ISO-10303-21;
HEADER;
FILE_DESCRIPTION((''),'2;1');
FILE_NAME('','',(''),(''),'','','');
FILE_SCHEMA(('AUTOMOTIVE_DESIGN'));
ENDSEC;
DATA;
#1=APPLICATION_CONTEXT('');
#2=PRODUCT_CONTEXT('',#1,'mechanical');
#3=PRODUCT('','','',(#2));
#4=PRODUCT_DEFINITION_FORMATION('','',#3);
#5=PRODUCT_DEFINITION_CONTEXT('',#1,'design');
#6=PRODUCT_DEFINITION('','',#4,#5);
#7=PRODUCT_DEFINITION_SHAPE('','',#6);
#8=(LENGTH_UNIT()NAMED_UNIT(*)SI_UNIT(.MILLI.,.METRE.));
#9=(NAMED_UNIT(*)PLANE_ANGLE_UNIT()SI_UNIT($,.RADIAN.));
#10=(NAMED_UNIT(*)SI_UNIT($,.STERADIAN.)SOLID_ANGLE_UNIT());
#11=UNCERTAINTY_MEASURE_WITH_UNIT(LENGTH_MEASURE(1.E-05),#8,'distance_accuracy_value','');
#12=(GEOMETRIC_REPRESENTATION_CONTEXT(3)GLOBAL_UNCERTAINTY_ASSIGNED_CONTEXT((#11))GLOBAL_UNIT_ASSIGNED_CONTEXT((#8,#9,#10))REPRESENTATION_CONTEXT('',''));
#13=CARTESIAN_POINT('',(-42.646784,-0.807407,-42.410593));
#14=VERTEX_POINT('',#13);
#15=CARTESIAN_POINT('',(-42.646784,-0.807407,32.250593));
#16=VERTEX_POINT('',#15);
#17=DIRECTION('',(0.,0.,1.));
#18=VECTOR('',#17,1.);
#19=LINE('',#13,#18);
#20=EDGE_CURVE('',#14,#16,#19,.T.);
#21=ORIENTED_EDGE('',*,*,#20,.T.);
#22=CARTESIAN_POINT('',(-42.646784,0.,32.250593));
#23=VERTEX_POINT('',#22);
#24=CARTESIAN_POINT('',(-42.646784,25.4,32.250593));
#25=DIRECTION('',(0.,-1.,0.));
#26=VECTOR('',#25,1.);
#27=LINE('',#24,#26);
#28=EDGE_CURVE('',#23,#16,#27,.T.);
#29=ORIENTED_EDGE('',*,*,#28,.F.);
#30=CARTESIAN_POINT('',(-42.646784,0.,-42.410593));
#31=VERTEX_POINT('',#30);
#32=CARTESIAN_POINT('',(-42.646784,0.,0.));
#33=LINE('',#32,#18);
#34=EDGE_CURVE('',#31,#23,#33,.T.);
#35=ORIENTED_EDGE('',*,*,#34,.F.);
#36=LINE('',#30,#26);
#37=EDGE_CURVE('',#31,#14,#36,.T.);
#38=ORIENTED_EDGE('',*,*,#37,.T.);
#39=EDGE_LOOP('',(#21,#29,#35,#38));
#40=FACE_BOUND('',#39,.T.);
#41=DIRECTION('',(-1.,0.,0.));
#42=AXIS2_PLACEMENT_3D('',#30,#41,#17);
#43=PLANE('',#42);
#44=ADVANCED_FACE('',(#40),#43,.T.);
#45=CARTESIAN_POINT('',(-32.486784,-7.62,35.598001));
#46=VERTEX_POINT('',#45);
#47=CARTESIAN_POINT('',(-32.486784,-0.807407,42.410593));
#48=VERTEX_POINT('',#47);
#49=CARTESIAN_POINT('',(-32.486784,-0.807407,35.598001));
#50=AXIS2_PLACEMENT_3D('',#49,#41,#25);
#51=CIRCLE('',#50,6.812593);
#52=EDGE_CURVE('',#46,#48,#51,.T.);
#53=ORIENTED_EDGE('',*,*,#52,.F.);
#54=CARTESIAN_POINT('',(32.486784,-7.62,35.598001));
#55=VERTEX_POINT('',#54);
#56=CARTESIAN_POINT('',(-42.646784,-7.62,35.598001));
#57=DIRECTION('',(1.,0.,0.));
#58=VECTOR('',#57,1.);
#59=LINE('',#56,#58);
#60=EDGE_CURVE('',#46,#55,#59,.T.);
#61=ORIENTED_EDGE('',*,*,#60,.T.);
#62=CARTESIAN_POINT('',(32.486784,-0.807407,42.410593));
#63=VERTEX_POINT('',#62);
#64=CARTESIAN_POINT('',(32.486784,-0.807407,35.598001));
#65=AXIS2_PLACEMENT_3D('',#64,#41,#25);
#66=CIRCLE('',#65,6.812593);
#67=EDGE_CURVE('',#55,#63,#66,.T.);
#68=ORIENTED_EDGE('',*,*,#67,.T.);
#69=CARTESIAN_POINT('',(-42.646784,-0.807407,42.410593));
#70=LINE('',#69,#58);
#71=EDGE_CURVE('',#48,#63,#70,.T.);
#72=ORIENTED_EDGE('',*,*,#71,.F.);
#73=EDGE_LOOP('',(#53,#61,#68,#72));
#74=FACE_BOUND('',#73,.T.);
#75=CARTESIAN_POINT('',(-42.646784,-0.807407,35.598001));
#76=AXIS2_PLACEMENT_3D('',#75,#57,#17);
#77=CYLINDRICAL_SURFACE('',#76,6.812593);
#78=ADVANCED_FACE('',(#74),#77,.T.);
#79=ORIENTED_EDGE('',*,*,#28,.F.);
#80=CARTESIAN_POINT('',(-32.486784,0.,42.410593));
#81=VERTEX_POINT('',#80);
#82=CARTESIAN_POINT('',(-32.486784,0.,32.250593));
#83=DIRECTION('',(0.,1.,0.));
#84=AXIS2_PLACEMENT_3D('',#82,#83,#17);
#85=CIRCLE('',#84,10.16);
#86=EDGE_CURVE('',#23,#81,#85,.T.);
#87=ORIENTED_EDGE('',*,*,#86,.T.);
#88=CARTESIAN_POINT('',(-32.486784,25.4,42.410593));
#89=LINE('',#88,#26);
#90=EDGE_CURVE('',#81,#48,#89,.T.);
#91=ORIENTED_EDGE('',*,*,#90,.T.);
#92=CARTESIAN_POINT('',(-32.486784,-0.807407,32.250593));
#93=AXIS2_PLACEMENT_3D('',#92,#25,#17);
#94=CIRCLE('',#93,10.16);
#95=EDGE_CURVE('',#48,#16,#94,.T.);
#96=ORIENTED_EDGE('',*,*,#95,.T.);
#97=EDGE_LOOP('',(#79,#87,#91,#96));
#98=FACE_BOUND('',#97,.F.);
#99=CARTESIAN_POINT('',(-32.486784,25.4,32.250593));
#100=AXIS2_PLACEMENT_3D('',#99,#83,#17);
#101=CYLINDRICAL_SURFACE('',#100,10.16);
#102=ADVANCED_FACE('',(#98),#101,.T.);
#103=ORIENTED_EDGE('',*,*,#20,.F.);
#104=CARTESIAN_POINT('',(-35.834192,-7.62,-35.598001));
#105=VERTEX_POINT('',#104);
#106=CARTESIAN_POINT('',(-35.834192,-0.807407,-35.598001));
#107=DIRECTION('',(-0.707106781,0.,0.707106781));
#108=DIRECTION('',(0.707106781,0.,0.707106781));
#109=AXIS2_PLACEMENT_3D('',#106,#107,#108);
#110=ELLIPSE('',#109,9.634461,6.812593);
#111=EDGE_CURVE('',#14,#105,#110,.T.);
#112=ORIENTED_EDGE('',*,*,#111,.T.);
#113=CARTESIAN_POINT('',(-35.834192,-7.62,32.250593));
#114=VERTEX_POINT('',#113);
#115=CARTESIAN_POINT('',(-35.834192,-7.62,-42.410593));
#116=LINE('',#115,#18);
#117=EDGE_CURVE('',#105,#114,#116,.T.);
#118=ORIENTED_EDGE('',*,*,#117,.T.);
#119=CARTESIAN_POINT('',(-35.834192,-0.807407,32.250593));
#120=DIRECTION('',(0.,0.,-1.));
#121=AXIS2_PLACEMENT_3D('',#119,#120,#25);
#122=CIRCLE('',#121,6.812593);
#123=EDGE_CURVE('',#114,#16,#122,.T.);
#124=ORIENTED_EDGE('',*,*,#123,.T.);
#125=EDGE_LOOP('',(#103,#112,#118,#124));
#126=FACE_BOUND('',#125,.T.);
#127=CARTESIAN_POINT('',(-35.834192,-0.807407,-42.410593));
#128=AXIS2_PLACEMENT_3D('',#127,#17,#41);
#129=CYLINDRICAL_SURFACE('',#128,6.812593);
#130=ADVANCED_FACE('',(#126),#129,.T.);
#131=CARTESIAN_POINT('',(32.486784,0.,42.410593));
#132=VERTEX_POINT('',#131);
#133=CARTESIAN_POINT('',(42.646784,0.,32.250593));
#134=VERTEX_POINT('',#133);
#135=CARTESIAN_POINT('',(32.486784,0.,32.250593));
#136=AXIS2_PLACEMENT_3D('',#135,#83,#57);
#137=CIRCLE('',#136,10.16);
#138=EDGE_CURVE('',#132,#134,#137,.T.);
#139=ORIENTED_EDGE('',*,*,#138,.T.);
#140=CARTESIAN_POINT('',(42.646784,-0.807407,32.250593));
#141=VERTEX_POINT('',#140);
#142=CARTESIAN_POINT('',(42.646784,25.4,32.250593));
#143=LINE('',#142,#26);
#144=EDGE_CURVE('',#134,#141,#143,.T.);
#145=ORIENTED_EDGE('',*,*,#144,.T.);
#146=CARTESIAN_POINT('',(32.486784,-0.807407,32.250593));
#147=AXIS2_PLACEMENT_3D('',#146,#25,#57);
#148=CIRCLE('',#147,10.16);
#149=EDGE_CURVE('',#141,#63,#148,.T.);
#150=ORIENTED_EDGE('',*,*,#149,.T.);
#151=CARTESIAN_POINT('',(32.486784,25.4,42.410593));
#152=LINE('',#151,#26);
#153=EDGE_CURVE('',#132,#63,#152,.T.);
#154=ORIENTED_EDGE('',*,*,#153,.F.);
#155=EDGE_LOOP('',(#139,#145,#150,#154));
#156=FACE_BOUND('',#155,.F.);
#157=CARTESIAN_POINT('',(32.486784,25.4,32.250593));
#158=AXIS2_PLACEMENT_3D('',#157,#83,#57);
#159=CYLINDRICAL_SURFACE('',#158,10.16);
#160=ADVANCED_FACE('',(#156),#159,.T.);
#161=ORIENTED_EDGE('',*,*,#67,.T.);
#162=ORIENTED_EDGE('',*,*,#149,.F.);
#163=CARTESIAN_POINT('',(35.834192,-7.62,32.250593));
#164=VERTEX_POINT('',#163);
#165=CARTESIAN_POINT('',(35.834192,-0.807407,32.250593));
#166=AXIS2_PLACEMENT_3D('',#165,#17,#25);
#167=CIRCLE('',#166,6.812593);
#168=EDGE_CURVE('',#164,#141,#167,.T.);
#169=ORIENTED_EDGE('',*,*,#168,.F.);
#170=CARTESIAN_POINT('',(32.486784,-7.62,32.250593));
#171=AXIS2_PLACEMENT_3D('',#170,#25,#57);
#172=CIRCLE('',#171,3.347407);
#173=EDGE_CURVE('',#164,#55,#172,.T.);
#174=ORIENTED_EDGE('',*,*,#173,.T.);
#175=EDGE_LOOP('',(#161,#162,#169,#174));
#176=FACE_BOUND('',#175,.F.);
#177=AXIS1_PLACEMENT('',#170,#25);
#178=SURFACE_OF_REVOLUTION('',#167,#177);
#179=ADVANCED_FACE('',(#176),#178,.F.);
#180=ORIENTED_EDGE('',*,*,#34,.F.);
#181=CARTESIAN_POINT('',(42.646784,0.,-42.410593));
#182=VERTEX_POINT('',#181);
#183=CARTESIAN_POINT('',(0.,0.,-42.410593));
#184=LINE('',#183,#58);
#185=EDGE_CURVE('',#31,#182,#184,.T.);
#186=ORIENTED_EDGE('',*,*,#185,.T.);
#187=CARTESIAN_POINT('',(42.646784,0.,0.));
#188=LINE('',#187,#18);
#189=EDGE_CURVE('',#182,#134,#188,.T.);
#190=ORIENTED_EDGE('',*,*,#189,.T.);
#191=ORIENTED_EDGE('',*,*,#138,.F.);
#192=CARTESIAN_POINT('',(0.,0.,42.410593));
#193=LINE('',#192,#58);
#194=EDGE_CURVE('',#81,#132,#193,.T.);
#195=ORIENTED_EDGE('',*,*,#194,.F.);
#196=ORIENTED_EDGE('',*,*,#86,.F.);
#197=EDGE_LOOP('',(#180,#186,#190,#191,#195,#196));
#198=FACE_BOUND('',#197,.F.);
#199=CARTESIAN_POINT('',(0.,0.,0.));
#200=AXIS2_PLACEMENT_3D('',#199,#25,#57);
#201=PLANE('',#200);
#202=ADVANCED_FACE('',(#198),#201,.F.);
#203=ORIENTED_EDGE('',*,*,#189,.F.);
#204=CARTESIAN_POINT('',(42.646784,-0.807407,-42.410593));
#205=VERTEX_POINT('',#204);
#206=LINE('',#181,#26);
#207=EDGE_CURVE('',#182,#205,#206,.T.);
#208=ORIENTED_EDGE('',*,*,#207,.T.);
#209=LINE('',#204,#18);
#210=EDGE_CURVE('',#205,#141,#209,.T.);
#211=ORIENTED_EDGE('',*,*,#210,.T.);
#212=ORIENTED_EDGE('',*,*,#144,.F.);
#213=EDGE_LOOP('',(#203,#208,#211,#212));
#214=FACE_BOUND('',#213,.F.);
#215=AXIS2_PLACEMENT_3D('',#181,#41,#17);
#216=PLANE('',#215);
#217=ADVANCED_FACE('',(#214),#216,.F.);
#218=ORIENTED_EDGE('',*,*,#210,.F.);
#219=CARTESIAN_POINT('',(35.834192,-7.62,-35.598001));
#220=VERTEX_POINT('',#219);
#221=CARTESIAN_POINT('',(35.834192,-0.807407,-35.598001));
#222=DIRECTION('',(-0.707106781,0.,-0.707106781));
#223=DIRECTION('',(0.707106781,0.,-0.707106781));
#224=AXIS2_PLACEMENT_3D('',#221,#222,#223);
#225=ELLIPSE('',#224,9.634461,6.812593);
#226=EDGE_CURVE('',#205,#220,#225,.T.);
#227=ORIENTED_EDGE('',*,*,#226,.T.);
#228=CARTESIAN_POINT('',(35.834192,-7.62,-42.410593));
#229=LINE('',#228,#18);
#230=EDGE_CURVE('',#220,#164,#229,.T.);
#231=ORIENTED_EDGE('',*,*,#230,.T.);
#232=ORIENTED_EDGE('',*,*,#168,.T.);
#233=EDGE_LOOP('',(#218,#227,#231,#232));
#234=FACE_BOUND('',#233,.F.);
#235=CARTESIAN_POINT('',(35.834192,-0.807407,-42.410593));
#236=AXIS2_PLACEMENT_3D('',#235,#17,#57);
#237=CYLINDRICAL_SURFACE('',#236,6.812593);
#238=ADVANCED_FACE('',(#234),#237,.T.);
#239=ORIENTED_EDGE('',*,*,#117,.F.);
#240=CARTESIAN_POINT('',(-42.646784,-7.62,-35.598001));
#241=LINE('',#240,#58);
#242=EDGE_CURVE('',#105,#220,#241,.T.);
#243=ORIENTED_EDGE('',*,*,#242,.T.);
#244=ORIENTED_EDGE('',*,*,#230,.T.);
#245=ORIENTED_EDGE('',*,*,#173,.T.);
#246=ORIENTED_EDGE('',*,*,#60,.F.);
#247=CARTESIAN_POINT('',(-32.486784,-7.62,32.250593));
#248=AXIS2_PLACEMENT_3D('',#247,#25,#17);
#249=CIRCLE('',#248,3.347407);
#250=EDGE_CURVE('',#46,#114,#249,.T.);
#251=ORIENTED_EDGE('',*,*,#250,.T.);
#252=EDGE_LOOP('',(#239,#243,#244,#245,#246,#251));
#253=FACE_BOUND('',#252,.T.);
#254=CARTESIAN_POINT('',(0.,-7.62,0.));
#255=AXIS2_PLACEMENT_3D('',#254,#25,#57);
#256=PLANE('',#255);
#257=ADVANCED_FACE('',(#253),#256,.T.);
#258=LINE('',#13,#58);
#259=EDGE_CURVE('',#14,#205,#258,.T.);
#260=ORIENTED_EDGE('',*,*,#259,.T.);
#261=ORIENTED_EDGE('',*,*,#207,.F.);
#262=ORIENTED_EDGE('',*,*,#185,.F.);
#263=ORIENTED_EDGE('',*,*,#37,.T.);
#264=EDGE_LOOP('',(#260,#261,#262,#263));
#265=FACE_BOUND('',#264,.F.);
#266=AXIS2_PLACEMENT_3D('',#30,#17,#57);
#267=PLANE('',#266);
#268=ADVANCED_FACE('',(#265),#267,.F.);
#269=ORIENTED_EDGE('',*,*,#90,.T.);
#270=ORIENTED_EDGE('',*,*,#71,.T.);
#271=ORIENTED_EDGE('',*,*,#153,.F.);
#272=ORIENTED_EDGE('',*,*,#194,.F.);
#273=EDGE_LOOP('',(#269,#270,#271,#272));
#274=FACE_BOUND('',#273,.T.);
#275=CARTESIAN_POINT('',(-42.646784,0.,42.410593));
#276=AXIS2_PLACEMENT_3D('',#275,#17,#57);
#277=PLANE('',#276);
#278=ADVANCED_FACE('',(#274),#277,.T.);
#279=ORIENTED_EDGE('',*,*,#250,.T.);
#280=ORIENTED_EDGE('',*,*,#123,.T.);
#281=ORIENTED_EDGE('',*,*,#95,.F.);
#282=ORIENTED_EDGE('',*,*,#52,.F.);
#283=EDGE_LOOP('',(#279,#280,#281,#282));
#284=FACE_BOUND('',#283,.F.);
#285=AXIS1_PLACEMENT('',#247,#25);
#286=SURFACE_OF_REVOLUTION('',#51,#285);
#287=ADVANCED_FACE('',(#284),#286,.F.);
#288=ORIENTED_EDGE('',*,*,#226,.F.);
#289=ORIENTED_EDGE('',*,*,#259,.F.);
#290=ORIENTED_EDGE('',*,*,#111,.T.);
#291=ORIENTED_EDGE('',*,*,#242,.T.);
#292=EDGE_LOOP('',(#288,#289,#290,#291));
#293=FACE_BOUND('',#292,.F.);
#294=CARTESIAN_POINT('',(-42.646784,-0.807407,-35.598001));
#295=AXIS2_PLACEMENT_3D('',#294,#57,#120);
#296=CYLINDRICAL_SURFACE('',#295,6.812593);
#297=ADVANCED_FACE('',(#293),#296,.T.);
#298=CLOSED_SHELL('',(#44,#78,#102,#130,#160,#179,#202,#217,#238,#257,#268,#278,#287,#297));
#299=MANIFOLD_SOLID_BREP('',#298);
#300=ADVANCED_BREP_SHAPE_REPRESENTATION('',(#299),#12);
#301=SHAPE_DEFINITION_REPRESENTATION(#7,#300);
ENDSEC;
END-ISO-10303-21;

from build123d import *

# Parameters (mm, degrees)
F0_W        = 85.2935686707
F0_H        = 84.8211869597
F0_R        = 1.905
F0_R_2      = 0.8509
F1_DEPTH    = 7.62
F2_R        = 6.8125926862
F3_T1_DEPTH = 33.02
F3_T4_ANGLE = 90
F3_T6_ANGLE = 90


# Not quite as in the source:
# - a fillet or chamfer that OpenCascade refuses, or shapes differently, is made with other operations: its cross-section is extruded or revolved along the edge and cut away or added


with BuildPart() as f1:
    # F0 (on Front) → F1 (new body)
    with BuildSketch(Plane.XZ):
        Rectangle(F0_W, F0_H)
        Polygon((0, 38.1), (38.1, 38.1), (38.1, -38.1), (0, -38.1), (-38.1, -38.1), (-38.1, 38.1), align=None, mode=Mode.SUBTRACT)
        Polygon((25.4, 25.4), (0, 25.4), (-25.4, 25.4), (-25.4, -25.4), (0, -25.4), (25.4, -25.4), align=None)
        with Locations((-18.288, -12.446)):
            Circle(F0_R, mode=Mode.SUBTRACT)
        with Locations((19.812, -12.446)):
            Circle(F0_R, mode=Mode.SUBTRACT)
        with Locations((-18.288, 12.954)):
            Circle(F0_R, mode=Mode.SUBTRACT)
        with Locations((19.812, 12.954)):
            Circle(F0_R, mode=Mode.SUBTRACT)
        Polygon((0, 25.4), (0, 38.1), (-38.1, 38.1), (-38.1, -38.1), (0, -38.1), (0, -25.4), (-25.4, -25.4), (-25.4, 25.4), align=None)
        Polygon((38.1, -38.1), (38.1, 38.1), (0, 38.1), (0, 25.4), (25.4, 25.4), (25.4, -25.4), (0, -25.4), (0, -38.1), align=None)
        with Locations((-18.288, -12.446)):
            Circle(F0_R)
        with Locations((-18.288, -12.446)):
            Circle(F0_R_2, mode=Mode.SUBTRACT)
        with Locations((-18.288, 12.954)):
            Circle(F0_R)
        with Locations((-18.288, 12.954)):
            Circle(F0_R_2, mode=Mode.SUBTRACT)
        with Locations((19.812, 12.954)):
            Circle(F0_R)
        with Locations((19.812, 12.954)):
            Circle(F0_R_2, mode=Mode.SUBTRACT)
        with Locations((19.812, -12.446)):
            Circle(F0_R)
        with Locations((19.812, -12.446)):
            Circle(F0_R_2, mode=Mode.SUBTRACT)
        with Locations((-18.288, 12.954)):
            Circle(F0_R_2)
        with Locations((-18.288, -12.446)):
            Circle(F0_R_2)
        with Locations((19.812, 12.954)):
            Circle(F0_R_2)
        with Locations((19.812, -12.446)):
            Circle(F0_R_2)
    extrude(amount=F1_DEPTH)

    # F2
    f2_edges = [f1.edges().sort_by_distance(p)[0] for p in [
        (0, -7.62, -42.410593),
        (-42.646784, -7.62, 0),
        (0, -7.62, 42.410593),
        (42.646784, -7.62, 0),
    ]]
    fillet(f2_edges, radius=F2_R)

    # F3: fillet of radius 10.16 on 2 edges, made by hand

    # F3_s2 → F3_t1 (cut)
    with BuildSketch(Plane.XZ.offset(-25.4)):
        with BuildLine():
            ThreePointArc((42.6467843354, 32.2505934799), (39.6709892322, 39.4347983767), (32.4867843354, 42.4105934799))
            Line((32.4867843354, 42.4105934799), (42.6467843354, 42.4105934799))
            Line((42.6467843354, 42.4105934799), (42.6467843354, 32.2505934799))
        make_face()
        with BuildLine():
            ThreePointArc((-32.4867843354, 42.4105934799), (-39.6709892322, 39.4347983767), (-42.6467843354, 32.2505934799))
            Line((-42.6467843354, 32.2505934799), (-42.6467843354, 42.4105934799))
            Line((-42.6467843354, 42.4105934799), (-32.4867843354, 42.4105934799))
        make_face()
    extrude(amount=F3_T1_DEPTH, mode=Mode.SUBTRACT)

    # F3_s3 → F3_t4 (revolve, cut)
    with BuildSketch(Plane.YZ.offset(-32.4867843354)):
        with BuildLine():
            ThreePointArc((-7.62, 35.5980007937), (-5.6246377997, 40.4152312796), (-0.8074073138, 42.4105934799))
            Line((-0.8074073138, 42.4105934799), (-7.62, 42.4105934799))
            Line((-7.62, 42.4105934799), (-7.62, 35.5980007937))
        make_face()
    revolve(axis=Axis((-32.4867843354, -7.62, 32.2505934799), (0, -1, 0)), revolution_arc=F3_T4_ANGLE, mode=Mode.SUBTRACT)

    # F3_s5 → F3_t6 (revolve, cut)
    with BuildSketch(Plane.XY.offset(32.2505934799)):
        with BuildLine():
            ThreePointArc((35.8341916492, -7.62), (40.6514221351, -5.6246377997), (42.6467843354, -0.8074073138))
            Line((42.6467843354, -0.8074073138), (42.6467843354, -7.62))
            Line((42.6467843354, -7.62), (35.8341916492, -7.62))
        make_face()
    revolve(axis=Axis((32.4867843354, -7.62, 32.2505934799), (0, -1, 0)), revolution_arc=F3_T6_ANGLE, mode=Mode.SUBTRACT)


solid = f1.part
